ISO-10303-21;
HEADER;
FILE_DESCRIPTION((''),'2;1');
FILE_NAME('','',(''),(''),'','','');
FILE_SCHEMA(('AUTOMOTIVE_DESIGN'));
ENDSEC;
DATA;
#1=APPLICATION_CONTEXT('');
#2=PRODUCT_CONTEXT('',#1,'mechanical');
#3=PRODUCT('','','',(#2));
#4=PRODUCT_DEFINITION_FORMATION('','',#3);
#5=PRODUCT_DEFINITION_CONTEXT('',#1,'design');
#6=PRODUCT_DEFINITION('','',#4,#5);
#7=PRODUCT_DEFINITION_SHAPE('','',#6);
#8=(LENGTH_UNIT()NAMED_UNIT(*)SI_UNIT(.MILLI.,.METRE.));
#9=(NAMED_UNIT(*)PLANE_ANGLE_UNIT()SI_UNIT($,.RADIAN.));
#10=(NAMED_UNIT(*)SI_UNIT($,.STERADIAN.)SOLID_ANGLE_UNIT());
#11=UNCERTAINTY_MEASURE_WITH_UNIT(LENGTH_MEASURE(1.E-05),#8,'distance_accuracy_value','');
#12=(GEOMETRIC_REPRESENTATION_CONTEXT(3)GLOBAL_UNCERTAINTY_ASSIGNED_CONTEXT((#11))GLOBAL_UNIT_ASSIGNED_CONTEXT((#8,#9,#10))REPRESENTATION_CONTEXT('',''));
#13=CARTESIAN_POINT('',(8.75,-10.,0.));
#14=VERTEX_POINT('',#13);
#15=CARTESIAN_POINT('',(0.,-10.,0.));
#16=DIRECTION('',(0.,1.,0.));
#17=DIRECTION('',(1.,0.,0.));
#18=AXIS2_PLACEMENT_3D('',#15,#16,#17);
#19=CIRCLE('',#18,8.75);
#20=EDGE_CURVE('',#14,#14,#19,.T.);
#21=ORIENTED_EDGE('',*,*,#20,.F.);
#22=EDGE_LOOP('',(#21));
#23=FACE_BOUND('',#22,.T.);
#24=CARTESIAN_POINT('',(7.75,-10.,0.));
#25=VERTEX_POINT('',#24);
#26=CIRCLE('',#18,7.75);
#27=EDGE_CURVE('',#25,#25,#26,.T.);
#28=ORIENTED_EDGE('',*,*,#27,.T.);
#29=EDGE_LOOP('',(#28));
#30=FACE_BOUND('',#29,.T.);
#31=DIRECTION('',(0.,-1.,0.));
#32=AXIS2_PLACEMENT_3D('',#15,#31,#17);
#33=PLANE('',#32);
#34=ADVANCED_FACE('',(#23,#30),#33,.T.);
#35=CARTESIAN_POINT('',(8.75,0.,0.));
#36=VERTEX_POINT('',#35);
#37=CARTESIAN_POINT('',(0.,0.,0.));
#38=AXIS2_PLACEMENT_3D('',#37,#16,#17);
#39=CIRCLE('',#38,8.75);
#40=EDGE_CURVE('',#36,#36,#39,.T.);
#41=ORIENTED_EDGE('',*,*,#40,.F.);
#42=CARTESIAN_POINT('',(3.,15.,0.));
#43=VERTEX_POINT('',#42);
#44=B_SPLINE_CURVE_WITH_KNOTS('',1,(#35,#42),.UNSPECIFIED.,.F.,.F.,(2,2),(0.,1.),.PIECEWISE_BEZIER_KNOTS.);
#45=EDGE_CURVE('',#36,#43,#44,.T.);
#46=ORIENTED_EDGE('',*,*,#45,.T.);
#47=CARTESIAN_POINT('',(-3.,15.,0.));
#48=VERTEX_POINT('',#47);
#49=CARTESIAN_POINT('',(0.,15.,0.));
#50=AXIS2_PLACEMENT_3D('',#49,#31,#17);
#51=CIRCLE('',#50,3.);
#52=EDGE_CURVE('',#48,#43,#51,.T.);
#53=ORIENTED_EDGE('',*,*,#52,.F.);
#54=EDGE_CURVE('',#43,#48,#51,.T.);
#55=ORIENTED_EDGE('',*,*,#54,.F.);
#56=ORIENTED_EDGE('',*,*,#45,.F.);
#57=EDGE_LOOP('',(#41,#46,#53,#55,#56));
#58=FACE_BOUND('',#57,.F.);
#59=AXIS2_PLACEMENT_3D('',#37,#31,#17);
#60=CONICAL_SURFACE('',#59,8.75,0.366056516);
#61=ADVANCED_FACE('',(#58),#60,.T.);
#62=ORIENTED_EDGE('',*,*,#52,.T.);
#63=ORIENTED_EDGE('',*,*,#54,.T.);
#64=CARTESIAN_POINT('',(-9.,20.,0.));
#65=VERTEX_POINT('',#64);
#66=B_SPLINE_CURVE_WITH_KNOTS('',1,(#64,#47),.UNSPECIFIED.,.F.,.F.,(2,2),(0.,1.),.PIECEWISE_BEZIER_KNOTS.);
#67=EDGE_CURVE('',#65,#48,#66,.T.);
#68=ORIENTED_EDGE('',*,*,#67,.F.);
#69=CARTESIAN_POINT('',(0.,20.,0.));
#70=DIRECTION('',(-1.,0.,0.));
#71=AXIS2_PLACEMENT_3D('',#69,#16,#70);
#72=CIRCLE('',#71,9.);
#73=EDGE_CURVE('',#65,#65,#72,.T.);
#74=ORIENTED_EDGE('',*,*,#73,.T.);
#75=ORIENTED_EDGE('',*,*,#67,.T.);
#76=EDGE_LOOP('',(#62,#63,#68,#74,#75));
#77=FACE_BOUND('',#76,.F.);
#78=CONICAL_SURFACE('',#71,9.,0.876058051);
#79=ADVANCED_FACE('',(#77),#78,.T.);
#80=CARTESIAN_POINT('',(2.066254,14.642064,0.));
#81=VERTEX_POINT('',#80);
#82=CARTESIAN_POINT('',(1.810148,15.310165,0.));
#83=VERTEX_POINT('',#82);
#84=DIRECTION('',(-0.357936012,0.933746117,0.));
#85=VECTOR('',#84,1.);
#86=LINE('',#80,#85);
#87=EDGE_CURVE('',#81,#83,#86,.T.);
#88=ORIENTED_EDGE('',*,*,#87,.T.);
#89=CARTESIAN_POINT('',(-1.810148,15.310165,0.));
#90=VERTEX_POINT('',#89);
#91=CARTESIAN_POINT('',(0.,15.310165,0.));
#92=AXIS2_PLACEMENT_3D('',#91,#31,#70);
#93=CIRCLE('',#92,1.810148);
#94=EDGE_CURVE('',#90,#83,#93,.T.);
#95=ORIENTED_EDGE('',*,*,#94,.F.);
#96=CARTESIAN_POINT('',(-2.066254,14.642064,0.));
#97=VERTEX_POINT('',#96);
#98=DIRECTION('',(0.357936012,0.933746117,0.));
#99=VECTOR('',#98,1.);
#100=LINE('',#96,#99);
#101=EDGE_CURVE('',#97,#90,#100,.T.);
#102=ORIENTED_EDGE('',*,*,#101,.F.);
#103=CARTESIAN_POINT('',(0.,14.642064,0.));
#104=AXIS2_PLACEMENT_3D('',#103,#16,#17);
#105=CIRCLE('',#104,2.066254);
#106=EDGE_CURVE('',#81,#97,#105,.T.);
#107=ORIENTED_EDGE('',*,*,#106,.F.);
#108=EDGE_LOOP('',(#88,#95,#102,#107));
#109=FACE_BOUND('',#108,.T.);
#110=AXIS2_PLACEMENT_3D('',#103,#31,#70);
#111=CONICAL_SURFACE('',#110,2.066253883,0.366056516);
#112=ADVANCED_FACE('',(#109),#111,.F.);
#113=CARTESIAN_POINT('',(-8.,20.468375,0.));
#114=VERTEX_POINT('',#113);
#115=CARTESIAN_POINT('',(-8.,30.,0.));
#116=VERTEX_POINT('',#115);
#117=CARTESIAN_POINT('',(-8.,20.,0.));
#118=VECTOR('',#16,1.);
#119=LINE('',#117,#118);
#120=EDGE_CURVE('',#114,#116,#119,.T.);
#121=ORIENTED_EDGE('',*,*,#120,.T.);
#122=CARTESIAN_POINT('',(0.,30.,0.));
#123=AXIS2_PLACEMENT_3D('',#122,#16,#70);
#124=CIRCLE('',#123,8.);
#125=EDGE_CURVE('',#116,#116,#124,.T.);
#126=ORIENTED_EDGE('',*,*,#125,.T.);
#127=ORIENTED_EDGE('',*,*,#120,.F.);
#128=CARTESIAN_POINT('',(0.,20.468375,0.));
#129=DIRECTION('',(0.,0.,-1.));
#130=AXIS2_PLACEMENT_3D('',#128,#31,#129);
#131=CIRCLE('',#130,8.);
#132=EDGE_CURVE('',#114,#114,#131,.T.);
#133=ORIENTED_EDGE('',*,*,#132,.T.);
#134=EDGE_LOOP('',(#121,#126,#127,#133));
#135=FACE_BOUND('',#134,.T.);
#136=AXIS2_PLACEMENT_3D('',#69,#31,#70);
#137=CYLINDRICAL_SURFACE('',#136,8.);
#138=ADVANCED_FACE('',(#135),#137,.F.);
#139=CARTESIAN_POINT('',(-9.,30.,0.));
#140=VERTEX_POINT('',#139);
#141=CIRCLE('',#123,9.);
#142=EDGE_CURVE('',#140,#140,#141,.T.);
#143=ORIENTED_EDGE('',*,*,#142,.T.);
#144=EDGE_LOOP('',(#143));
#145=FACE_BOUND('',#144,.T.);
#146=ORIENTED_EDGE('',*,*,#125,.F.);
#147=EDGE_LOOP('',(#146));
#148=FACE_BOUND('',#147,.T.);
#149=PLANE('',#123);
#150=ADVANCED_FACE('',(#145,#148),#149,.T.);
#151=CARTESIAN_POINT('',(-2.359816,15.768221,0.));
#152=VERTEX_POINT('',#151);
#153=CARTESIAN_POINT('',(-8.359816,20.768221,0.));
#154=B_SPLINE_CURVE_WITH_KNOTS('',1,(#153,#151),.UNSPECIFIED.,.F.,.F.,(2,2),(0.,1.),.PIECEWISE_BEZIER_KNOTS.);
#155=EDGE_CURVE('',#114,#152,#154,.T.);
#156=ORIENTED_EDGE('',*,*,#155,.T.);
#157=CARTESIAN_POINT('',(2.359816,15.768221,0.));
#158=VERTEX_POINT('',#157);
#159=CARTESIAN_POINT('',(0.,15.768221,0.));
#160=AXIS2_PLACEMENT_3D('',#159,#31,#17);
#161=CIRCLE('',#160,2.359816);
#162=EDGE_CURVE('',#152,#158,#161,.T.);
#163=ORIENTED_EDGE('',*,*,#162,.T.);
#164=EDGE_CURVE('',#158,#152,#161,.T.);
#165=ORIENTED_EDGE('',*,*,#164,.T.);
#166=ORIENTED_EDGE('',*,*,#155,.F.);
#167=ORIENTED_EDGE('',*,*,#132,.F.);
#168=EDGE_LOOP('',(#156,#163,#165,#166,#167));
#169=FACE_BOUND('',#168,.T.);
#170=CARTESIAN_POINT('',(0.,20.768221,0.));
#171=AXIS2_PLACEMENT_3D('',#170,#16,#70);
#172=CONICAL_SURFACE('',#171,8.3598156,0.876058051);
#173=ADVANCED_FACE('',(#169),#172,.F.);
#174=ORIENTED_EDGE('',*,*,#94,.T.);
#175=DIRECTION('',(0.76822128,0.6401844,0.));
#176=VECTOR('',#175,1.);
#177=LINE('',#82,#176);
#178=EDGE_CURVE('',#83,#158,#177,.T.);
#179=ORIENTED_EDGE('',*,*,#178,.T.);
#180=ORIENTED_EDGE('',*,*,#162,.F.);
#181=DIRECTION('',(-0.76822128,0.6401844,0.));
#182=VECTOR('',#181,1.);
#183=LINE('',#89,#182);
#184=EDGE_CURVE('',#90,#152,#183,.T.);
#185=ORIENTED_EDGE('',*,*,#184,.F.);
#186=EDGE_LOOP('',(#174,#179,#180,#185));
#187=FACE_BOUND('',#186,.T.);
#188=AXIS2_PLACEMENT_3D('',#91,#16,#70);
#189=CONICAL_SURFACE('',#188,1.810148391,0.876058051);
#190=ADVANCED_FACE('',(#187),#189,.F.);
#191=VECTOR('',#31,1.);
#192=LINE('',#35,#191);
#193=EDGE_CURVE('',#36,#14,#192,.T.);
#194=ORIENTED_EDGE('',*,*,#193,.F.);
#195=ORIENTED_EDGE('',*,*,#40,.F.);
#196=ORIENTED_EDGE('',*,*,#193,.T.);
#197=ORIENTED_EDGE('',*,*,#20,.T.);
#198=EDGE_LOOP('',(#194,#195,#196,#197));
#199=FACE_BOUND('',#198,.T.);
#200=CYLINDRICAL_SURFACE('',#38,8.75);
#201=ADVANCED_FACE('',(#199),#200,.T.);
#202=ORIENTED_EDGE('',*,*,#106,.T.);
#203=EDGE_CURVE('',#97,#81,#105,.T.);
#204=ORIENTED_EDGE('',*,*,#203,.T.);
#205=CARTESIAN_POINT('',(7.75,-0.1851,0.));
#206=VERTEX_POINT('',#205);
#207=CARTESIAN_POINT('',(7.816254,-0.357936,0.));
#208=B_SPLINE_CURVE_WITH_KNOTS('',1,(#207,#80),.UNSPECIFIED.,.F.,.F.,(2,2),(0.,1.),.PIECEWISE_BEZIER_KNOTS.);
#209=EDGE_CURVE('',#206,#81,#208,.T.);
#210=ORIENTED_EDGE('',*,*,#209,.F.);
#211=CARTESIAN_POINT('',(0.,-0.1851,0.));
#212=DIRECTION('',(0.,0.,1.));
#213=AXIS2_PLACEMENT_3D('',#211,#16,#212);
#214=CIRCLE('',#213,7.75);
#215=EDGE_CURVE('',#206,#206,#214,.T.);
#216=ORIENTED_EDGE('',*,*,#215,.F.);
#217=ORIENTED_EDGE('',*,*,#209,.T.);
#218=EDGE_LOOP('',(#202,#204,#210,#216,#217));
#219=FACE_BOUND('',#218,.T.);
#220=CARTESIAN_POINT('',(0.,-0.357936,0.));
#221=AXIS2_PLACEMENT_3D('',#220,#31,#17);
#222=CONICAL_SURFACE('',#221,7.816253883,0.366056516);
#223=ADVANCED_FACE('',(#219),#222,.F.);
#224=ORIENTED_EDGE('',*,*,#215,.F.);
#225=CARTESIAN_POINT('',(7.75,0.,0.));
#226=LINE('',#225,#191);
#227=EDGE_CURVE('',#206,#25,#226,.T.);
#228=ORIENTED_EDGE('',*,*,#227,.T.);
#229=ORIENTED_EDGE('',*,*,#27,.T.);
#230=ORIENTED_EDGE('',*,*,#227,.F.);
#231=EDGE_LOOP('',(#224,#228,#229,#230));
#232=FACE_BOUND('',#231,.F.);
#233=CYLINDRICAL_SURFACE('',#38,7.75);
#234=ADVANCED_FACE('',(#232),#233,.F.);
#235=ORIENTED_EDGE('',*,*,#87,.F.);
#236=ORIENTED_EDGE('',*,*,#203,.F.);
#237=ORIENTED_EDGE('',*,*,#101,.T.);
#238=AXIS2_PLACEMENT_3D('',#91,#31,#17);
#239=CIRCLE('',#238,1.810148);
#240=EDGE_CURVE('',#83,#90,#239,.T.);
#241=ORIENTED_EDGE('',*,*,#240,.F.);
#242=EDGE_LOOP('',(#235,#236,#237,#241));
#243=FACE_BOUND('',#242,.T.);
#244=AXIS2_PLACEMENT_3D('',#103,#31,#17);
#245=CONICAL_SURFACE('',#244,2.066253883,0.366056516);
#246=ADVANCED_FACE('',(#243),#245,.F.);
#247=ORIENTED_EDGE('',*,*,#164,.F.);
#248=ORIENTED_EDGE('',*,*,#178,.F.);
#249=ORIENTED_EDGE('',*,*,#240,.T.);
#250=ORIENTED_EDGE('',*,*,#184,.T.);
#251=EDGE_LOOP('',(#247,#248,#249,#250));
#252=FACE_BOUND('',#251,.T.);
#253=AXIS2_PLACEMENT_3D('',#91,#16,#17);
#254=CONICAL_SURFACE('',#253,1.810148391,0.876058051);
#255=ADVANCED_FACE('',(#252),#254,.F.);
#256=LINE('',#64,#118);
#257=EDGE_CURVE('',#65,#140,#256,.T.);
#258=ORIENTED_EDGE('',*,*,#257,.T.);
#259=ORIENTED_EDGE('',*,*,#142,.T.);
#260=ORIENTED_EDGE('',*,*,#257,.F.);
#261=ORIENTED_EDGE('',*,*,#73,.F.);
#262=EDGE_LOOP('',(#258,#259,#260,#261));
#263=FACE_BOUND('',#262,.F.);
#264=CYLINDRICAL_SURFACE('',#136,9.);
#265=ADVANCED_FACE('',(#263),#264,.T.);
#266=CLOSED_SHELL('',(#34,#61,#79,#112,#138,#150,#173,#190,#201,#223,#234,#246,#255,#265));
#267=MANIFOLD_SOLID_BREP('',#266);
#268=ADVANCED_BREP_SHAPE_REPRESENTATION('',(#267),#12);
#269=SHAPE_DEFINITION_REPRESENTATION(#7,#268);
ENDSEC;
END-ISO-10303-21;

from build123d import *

# Parameters (mm, degrees)
F0_R         = 8.75
F4_R         = 3
F6_DEPTH     = 10
F10_R        = 9
F5_FACE1_R   = 3
F12_DEPTH    = 10
F13_T        = 1
F13_T4_ANGLE = 180.000000001
F13_T6_ANGLE = 180.000000001


# Not quite as in the source:
# - a shell that OpenCascade refuses in one call is made with other operations: the cavity is built on its own and cut out


with BuildPart() as f5:
    # F0 (on Front) → F5 section 0
    with BuildSketch(Plane.XZ):
        Circle(F0_R)
    # F4 (on line) → F5 section 1
    with BuildSketch(Plane(origin=(0, 15, 0), x_dir=(-1, 0, 0), z_dir=(0, 1, 0))):
        Circle(F4_R)
    loft()

    # F6 (add): a face of the model
    f6_faces = [f5.faces().sort_by_distance(p)[0] for p in [
        (0, 0, 0),
    ]]
    extrude(f6_faces, amount=F6_DEPTH)

    # F10 (on line) → F11 section 0
    with BuildSketch(Plane(origin=(0, 20, 0), x_dir=(-1, 0, 0), z_dir=(0, 1, 0))):
        Circle(F10_R)
    # F5_face1 (on face) → F11 section 1
    with BuildSketch(Plane(origin=(0, 15, 0), x_dir=(-1, 0, 0), z_dir=(0, 1, 0))):
        Circle(F5_FACE1_R)
    loft()

    # F12 (add): a face of the model
    f12_faces = [f5.faces().sort_by_distance(p)[0] for p in [
        (0, 20, 0),
    ]]
    extrude(f12_faces, amount=F12_DEPTH)

    # F13: shell of thickness 1, made by hand


with BuildPart() as f13_core1:
    # F13_t2: copy of F5
    add(f5.part)

    # the walls: a layer under each face that stays
    f13_faces = [f13_core1.faces().sort_by_distance(p)[0] for p in [
        (-5.875, 7.5, 0),
        (6, 17.5, 0),
        (-8.75, -5, 0),
        (9, 25, 0),
    ]]
    thicken(f13_faces, amount=-F13_T, mode=Mode.SUBTRACT)

    # F13_s3 → F13_t4 (revolve, cut)
    with BuildSketch(Plane.XY):
        Polygon((3.0157393052, 14.9958971473), (2.0662538827, 14.6420639884), (1.8101483908, 15.3101652716), (2.3598156003, 15.7682212796), align=None)
    revolve(axis=Axis((0, 15, 0), (0, -1, 0)), revolution_arc=F13_T4_ANGLE, mode=Mode.SUBTRACT)

    # F13_s5 → F13_t6 (revolve, cut)
    with BuildSketch(Plane.XY):
        Polygon((-3.0157393052, 14.9958971473), (-2.0662538827, 14.6420639884), (-1.8101483908, 15.3101652716), (-2.3598156003, 15.7682212796), align=None)
    revolve(axis=Axis((0, 15, 0), (0, -1, 0)), revolution_arc=F13_T6_ANGLE, mode=Mode.SUBTRACT)


with BuildPart() as f5_1:
    add(f5.part)

    # what is left inside the walls is the cavity
    f13_cavity = [f13_core1.part.solids().sort_by_distance(p)[0] for p in [
        (-5.84608, 4.753709, 0),
    ]]
    add(f13_cavity, mode=Mode.SUBTRACT)


solid = f5_1.part
